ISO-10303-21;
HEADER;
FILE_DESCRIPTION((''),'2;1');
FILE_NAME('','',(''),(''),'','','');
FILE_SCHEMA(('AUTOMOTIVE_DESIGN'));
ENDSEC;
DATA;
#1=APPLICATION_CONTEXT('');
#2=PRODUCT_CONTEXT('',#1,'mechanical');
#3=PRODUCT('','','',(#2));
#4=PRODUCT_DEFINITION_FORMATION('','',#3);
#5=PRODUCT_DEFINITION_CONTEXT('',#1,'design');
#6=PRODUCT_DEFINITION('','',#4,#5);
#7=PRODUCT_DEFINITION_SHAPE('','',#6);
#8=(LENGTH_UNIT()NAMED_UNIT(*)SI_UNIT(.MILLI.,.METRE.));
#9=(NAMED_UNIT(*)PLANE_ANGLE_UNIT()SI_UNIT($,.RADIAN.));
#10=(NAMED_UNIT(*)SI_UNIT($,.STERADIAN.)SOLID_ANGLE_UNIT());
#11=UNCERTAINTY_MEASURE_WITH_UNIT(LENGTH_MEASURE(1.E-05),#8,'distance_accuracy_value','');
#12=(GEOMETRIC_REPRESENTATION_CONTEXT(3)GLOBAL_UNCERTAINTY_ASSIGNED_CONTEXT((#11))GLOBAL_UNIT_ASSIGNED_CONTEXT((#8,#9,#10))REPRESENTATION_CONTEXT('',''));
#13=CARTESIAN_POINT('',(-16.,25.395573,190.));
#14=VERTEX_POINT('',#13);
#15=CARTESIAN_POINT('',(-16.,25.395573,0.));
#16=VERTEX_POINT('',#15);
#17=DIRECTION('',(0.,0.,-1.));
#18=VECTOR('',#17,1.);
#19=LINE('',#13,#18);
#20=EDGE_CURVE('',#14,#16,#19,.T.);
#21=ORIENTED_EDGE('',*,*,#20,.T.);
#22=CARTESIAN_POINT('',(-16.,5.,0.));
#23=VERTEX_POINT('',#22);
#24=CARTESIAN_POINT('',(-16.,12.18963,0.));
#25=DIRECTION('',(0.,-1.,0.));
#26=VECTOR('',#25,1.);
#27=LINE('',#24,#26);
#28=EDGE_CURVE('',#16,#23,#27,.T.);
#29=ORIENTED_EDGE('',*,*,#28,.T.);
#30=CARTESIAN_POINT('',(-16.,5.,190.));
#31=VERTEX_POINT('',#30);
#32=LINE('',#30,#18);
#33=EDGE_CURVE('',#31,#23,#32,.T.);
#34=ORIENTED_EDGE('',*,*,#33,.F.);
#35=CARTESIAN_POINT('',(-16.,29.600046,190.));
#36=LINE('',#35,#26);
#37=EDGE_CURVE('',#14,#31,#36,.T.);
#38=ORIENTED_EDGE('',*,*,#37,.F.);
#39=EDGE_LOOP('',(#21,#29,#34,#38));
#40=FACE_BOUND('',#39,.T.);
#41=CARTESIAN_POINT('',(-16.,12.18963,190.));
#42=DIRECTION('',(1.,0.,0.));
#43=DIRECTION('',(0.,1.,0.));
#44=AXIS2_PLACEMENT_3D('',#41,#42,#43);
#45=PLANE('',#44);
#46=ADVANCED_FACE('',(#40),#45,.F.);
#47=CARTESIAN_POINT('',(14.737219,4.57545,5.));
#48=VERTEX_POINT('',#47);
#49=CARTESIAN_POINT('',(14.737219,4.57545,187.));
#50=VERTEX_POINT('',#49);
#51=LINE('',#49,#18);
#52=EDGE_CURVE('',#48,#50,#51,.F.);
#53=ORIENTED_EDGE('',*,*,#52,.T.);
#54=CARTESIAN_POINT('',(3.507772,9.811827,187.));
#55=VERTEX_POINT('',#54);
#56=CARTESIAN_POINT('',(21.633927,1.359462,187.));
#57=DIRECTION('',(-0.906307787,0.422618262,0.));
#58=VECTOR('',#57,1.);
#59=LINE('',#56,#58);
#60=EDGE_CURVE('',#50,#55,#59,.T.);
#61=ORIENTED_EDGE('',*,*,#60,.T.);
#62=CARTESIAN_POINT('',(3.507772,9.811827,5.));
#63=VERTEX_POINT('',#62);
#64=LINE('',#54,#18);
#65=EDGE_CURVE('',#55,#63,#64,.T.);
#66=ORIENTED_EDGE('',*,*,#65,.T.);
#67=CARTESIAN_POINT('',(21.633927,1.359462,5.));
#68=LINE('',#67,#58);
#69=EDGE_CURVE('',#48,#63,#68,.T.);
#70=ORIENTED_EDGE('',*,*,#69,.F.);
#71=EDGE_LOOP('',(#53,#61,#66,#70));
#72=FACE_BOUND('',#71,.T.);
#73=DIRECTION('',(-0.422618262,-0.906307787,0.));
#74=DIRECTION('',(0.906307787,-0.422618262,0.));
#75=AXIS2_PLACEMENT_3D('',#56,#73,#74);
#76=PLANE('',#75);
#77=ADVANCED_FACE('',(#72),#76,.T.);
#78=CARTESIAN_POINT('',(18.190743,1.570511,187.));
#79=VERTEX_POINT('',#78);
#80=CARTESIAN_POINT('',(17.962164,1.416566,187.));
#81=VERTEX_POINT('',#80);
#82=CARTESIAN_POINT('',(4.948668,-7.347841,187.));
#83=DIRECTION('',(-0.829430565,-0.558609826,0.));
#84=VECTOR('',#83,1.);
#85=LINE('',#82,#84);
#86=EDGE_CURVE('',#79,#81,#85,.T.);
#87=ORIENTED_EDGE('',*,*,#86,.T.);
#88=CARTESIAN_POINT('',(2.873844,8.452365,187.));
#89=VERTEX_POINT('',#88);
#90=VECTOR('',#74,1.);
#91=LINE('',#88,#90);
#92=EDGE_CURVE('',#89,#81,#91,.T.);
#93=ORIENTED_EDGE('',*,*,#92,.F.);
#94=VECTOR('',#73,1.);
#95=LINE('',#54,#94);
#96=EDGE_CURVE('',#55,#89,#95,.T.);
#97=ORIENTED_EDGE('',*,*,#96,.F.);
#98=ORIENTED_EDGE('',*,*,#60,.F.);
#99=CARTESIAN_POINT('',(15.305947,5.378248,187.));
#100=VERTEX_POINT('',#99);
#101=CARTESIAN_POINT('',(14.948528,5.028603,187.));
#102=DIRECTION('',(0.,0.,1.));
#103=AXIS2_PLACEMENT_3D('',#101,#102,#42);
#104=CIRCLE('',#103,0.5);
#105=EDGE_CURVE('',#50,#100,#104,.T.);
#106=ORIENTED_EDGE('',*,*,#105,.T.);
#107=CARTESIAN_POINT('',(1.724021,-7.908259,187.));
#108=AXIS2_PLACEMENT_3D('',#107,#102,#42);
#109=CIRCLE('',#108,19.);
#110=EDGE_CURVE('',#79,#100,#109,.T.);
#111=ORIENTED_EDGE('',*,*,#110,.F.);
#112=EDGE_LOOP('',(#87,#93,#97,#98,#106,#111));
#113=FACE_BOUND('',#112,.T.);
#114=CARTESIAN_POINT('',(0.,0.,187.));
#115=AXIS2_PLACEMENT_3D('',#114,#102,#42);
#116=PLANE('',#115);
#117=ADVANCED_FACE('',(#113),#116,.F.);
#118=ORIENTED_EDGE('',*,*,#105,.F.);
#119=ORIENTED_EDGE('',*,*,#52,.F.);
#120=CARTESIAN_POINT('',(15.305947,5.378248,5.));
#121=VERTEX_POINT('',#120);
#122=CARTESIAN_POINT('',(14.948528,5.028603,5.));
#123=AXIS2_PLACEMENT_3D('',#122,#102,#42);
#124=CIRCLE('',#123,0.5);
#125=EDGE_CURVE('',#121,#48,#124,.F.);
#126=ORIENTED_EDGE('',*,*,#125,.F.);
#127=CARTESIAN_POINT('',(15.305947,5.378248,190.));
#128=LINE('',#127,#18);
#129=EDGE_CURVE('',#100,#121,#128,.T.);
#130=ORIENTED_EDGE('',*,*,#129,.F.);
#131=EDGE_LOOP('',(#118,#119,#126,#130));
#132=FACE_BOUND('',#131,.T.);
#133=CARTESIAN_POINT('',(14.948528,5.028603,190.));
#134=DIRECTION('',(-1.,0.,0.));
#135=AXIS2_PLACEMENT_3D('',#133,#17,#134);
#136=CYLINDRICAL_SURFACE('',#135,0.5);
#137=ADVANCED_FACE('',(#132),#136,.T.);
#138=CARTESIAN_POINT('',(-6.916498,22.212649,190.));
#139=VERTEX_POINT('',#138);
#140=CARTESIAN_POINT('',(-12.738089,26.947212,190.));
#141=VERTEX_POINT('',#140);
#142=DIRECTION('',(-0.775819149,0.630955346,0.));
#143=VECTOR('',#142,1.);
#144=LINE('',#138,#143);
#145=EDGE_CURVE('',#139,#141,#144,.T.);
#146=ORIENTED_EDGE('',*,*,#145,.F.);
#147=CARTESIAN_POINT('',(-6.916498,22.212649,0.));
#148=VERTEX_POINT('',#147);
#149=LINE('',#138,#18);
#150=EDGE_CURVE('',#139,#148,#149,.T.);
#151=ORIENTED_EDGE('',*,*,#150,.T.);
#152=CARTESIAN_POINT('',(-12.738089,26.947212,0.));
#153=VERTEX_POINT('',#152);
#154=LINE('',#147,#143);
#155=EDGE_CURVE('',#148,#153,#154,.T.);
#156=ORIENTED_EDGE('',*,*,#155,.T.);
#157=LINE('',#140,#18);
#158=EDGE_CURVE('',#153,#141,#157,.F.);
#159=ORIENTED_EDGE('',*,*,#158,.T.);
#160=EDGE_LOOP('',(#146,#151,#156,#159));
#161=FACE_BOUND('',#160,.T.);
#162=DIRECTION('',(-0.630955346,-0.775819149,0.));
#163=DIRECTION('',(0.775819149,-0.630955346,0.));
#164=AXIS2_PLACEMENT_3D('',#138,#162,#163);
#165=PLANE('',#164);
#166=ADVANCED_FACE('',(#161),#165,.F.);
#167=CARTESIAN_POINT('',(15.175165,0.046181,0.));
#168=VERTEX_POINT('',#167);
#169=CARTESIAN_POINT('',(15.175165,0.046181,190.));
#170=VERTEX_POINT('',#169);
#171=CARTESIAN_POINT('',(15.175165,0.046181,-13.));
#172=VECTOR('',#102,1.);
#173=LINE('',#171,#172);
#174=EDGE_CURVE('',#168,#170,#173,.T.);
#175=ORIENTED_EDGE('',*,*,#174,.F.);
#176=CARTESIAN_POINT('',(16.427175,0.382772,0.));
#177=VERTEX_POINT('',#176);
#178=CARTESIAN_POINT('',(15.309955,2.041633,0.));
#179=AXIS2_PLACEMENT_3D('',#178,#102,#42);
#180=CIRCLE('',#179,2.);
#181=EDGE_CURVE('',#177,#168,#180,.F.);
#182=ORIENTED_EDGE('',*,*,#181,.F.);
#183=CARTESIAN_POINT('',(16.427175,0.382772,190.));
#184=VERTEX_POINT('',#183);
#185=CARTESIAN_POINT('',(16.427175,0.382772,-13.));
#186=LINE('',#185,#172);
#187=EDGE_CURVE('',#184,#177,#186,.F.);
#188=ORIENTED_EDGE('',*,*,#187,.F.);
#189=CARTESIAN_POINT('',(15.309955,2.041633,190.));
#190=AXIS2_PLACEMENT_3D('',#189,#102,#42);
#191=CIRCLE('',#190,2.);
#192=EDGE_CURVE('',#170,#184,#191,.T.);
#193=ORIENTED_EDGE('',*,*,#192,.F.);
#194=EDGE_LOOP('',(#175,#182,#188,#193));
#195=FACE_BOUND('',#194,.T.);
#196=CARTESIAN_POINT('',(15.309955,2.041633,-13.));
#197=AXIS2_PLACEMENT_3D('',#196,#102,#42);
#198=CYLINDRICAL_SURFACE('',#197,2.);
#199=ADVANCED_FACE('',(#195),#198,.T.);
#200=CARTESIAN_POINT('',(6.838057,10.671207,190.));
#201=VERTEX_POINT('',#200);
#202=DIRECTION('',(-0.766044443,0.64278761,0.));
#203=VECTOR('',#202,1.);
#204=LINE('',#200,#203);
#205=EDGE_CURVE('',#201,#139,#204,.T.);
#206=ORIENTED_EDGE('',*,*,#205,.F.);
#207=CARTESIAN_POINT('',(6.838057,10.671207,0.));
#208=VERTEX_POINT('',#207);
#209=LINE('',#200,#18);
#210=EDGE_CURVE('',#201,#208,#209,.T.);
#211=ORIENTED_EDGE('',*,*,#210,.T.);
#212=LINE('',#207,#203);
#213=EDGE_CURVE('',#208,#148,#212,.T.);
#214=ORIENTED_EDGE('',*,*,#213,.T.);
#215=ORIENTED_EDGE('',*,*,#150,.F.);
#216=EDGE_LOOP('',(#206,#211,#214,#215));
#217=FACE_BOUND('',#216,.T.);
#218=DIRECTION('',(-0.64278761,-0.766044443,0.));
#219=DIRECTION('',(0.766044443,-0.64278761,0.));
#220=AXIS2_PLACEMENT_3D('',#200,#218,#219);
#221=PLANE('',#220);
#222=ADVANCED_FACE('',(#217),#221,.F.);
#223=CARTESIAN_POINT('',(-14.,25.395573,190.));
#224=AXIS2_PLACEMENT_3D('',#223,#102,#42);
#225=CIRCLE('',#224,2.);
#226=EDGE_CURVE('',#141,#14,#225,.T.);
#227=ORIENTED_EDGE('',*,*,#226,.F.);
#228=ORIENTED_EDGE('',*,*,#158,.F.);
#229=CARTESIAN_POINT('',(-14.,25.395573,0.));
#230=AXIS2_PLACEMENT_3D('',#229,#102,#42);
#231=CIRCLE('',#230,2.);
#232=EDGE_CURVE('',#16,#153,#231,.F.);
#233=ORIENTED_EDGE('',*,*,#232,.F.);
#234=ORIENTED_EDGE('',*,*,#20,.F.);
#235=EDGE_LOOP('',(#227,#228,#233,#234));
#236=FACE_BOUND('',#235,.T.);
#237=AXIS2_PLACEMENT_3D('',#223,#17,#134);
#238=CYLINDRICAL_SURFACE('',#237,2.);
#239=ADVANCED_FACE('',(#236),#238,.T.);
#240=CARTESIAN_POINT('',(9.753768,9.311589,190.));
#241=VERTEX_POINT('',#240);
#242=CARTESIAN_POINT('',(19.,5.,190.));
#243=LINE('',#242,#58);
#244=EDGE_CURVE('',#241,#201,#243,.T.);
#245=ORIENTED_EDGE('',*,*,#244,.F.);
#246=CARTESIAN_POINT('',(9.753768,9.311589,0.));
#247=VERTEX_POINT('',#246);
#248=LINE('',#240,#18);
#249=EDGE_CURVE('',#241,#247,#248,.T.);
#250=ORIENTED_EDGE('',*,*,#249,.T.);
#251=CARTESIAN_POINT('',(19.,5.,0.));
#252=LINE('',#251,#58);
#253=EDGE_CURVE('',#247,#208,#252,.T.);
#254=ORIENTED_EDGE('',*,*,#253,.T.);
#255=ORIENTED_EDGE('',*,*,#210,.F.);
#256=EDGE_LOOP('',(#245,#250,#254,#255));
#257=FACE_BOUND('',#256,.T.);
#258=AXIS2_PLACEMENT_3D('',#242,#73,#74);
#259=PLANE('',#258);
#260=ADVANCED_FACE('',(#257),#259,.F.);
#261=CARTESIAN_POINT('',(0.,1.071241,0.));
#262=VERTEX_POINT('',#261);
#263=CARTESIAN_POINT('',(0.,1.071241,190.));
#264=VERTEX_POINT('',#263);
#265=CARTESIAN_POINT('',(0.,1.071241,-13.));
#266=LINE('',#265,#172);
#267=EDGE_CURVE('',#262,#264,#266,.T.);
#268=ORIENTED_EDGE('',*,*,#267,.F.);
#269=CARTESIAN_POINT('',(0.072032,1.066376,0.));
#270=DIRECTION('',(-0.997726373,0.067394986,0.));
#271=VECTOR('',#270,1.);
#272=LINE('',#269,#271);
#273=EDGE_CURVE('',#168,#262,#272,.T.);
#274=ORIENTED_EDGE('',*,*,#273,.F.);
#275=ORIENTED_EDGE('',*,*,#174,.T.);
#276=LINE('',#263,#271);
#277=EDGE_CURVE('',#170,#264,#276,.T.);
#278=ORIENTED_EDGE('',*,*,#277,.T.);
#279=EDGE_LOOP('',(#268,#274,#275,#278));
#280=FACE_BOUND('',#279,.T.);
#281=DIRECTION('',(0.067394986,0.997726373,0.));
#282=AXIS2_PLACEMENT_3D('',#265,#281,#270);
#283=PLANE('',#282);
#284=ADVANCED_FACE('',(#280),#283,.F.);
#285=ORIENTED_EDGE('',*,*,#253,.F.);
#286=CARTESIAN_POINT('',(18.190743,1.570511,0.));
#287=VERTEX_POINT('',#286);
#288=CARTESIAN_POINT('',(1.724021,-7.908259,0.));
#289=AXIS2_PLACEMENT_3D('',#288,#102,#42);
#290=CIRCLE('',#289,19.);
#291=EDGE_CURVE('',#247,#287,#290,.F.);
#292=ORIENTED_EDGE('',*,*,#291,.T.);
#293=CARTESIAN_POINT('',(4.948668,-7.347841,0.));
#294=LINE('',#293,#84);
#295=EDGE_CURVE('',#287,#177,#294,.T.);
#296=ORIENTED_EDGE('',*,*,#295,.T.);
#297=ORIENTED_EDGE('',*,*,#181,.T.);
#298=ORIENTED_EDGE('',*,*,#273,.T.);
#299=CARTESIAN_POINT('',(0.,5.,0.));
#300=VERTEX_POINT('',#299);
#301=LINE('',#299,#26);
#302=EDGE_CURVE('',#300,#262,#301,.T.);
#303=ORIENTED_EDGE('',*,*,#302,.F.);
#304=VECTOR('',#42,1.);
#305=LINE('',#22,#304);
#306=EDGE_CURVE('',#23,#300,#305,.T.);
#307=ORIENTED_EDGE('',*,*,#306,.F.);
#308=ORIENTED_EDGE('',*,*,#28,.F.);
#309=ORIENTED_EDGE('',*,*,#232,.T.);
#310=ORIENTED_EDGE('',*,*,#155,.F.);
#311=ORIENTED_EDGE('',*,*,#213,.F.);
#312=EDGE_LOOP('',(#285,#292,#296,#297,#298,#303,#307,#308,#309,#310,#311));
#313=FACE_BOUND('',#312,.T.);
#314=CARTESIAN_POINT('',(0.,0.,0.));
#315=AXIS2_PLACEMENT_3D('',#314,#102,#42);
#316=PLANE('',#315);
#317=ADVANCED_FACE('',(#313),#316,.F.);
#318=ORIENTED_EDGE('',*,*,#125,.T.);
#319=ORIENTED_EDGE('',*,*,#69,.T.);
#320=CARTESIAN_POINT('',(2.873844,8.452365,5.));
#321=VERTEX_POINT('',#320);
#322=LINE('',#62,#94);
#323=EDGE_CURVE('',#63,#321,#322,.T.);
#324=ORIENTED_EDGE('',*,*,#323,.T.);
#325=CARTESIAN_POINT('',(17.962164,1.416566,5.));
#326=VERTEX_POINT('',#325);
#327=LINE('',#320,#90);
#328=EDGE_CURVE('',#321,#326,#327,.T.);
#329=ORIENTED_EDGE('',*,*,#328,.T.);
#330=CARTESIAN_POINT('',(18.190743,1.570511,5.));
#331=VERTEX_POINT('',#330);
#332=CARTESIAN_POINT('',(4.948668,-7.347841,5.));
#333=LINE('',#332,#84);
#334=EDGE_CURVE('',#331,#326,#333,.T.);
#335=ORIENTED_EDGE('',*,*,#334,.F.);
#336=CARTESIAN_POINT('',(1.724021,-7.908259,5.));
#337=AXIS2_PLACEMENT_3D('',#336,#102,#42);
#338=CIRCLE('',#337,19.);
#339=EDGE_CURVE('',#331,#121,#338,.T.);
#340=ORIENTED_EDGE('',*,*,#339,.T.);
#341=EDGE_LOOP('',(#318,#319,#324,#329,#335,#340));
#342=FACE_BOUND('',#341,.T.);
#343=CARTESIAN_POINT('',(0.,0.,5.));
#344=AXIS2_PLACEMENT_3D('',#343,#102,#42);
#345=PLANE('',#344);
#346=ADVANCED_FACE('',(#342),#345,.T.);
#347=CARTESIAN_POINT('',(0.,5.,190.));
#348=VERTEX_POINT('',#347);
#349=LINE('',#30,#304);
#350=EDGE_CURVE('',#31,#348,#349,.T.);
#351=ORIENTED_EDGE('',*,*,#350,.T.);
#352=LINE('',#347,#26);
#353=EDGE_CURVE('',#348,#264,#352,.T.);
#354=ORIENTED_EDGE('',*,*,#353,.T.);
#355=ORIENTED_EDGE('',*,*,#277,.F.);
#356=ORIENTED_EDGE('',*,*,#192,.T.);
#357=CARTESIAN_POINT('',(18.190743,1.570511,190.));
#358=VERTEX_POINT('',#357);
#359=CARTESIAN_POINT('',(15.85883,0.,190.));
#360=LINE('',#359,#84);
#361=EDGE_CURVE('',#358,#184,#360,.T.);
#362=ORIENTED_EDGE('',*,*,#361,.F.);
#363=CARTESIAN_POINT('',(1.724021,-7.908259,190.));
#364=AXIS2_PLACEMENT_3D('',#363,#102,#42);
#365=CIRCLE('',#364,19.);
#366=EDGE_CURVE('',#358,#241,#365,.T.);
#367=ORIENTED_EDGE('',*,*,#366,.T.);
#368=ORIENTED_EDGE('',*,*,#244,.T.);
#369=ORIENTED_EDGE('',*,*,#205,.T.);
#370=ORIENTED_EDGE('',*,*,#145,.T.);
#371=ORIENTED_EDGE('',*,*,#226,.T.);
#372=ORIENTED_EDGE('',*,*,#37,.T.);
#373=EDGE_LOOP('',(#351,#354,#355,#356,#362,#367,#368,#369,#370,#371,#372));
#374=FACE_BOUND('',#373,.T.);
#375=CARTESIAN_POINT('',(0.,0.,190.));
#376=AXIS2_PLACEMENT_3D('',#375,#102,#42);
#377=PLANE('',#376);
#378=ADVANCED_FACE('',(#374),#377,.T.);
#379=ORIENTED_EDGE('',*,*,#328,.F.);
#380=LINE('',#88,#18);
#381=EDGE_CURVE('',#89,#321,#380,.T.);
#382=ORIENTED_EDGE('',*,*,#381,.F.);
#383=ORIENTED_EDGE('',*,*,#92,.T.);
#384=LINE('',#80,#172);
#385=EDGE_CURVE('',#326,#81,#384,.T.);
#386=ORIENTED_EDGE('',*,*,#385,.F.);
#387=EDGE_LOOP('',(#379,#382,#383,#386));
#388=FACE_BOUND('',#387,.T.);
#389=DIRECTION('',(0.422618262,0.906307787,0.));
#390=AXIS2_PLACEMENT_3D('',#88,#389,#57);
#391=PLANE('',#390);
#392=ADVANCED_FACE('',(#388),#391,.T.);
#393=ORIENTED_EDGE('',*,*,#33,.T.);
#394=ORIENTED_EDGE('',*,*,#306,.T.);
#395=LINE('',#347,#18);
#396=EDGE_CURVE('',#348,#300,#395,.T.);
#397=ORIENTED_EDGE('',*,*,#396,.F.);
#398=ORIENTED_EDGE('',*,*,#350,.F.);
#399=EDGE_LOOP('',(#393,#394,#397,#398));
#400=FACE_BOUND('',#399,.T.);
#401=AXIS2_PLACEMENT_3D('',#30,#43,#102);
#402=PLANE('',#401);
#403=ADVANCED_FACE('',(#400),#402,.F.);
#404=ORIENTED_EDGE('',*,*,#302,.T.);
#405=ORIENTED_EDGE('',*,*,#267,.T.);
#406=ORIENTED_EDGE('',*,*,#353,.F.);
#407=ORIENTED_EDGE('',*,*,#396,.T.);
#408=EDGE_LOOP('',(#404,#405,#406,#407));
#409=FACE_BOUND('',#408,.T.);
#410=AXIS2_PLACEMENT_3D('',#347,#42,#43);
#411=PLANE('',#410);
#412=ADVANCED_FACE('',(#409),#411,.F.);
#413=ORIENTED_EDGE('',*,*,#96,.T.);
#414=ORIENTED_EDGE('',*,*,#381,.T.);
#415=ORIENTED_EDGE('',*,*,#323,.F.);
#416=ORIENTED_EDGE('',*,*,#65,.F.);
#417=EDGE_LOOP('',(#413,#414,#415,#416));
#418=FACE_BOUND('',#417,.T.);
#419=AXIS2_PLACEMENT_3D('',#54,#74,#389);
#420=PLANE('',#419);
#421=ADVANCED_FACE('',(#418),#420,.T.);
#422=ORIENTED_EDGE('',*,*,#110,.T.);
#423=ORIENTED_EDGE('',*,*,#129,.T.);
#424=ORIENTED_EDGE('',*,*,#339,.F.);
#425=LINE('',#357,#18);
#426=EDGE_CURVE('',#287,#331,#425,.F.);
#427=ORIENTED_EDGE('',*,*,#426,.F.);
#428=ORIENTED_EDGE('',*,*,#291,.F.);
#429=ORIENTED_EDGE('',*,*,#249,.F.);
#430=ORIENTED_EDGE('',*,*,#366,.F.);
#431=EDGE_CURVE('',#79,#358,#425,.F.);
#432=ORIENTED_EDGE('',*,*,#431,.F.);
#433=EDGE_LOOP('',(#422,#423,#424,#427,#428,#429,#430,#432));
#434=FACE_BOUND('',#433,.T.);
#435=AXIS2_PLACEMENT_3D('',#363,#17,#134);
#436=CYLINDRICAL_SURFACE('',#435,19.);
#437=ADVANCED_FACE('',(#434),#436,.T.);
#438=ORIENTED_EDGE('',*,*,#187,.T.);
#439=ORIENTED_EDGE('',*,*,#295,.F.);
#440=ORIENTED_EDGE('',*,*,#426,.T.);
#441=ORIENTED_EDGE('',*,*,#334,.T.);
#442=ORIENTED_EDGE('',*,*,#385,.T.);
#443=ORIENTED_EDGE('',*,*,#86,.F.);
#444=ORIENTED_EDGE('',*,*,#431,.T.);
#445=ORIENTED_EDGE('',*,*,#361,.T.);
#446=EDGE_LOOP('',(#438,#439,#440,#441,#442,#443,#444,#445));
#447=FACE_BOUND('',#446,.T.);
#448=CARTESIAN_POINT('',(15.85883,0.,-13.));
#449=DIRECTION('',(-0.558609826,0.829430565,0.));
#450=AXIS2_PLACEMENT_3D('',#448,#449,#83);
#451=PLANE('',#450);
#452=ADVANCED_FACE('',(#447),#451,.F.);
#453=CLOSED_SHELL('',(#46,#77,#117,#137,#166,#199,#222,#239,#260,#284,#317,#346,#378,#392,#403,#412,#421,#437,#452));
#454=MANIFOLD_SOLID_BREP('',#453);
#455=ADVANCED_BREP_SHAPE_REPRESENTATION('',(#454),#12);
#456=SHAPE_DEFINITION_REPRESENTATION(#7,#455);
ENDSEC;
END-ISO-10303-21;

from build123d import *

# Parameters (mm, degrees)
BOSS_EXTRUDE1_DEPTH = 190
CUT_EXTRUDE1_START  = 5
CUT_EXTRUDE1_DEPTH  = 182
FILLET3_START       = -1
FILLET3_DEPTH       = 192
CUT_EXTRUDE3_DEPTH  = 203
FILLET4_R           = 0.5
FILLET5_R           = 2
FILLET6_R           = 2


with BuildPart() as part:
    # Sketch1 → Boss-Extrude1 (new body)
    with BuildSketch(Plane.XY):
        Polygon((0, 0), (19, 0), (19, 5), (6.83805717, 10.67120708), (-6.91649822, 22.212649435), (-16, 29.600046382), (-16, 12.189630226), (-16, 5), (0, 5), align=None)
    extrude(amount=BOSS_EXTRUDE1_DEPTH)

    # Sketch2 → Cut-Extrude1 (cut)
    with BuildSketch(Plane.XY.offset(CUT_EXTRUDE1_START)):
        Polygon((21.633927393, 1.359461681), (3.507771652, 9.811826915), (2.873844259, 8.452365235), (21, 0), align=None)
    extrude(amount=CUT_EXTRUDE1_DEPTH, mode=Mode.SUBTRACT)

    # Fillet3: read off the stored shape, not the designer's step
    # Fillet3 outline → Fillet3 (cut)
    with BuildSketch(Plane.XY.offset(FILLET3_START)):
        with BuildLine():
            Line((19, 5), (9.753768459, 9.311588577))
            ThreePointArc((9.753768459, 9.311588577), (15.206282278, 5.479370881), (19, 0))
            Line((19, 0), (19, 5))
        make_face()
    extrude(amount=FILLET3_DEPTH, mode=Mode.SUBTRACT)

    # Sketch6 → Cut-Extrude3 (cut)
    with BuildSketch(Plane.XY.offset(190)):
        Polygon((0, 1.071241245), (15.85883014, 0), (18.190743079, 1.570510584), (20.776431757, 1.395851019), (18.077940116, -2.328162287), (-1.219539475, -1.555674607), (-2.427097473, 0.237321984), align=None)
    extrude(amount=-CUT_EXTRUDE3_DEPTH, mode=Mode.SUBTRACT)

    # Fillet4
    fillet4_edges = [part.edges().sort_by_distance(p)[0] for p in [
        (16.849447034, 3.590501512, 96),
    ]]
    fillet(fillet4_edges, radius=FILLET4_R)

    # Fillet5
    fillet5_edges = [part.edges().sort_by_distance(p)[0] for p in [
        (15.85883014, 0, 95),
    ]]
    fillet(fillet5_edges, radius=FILLET5_R)

    # Fillet6
    fillet6_edges = [part.edges().sort_by_distance(p)[0] for p in [
        (-16, 29.600046382, 95),
    ]]
    fillet(fillet6_edges, radius=FILLET6_R)


solid = part.part
